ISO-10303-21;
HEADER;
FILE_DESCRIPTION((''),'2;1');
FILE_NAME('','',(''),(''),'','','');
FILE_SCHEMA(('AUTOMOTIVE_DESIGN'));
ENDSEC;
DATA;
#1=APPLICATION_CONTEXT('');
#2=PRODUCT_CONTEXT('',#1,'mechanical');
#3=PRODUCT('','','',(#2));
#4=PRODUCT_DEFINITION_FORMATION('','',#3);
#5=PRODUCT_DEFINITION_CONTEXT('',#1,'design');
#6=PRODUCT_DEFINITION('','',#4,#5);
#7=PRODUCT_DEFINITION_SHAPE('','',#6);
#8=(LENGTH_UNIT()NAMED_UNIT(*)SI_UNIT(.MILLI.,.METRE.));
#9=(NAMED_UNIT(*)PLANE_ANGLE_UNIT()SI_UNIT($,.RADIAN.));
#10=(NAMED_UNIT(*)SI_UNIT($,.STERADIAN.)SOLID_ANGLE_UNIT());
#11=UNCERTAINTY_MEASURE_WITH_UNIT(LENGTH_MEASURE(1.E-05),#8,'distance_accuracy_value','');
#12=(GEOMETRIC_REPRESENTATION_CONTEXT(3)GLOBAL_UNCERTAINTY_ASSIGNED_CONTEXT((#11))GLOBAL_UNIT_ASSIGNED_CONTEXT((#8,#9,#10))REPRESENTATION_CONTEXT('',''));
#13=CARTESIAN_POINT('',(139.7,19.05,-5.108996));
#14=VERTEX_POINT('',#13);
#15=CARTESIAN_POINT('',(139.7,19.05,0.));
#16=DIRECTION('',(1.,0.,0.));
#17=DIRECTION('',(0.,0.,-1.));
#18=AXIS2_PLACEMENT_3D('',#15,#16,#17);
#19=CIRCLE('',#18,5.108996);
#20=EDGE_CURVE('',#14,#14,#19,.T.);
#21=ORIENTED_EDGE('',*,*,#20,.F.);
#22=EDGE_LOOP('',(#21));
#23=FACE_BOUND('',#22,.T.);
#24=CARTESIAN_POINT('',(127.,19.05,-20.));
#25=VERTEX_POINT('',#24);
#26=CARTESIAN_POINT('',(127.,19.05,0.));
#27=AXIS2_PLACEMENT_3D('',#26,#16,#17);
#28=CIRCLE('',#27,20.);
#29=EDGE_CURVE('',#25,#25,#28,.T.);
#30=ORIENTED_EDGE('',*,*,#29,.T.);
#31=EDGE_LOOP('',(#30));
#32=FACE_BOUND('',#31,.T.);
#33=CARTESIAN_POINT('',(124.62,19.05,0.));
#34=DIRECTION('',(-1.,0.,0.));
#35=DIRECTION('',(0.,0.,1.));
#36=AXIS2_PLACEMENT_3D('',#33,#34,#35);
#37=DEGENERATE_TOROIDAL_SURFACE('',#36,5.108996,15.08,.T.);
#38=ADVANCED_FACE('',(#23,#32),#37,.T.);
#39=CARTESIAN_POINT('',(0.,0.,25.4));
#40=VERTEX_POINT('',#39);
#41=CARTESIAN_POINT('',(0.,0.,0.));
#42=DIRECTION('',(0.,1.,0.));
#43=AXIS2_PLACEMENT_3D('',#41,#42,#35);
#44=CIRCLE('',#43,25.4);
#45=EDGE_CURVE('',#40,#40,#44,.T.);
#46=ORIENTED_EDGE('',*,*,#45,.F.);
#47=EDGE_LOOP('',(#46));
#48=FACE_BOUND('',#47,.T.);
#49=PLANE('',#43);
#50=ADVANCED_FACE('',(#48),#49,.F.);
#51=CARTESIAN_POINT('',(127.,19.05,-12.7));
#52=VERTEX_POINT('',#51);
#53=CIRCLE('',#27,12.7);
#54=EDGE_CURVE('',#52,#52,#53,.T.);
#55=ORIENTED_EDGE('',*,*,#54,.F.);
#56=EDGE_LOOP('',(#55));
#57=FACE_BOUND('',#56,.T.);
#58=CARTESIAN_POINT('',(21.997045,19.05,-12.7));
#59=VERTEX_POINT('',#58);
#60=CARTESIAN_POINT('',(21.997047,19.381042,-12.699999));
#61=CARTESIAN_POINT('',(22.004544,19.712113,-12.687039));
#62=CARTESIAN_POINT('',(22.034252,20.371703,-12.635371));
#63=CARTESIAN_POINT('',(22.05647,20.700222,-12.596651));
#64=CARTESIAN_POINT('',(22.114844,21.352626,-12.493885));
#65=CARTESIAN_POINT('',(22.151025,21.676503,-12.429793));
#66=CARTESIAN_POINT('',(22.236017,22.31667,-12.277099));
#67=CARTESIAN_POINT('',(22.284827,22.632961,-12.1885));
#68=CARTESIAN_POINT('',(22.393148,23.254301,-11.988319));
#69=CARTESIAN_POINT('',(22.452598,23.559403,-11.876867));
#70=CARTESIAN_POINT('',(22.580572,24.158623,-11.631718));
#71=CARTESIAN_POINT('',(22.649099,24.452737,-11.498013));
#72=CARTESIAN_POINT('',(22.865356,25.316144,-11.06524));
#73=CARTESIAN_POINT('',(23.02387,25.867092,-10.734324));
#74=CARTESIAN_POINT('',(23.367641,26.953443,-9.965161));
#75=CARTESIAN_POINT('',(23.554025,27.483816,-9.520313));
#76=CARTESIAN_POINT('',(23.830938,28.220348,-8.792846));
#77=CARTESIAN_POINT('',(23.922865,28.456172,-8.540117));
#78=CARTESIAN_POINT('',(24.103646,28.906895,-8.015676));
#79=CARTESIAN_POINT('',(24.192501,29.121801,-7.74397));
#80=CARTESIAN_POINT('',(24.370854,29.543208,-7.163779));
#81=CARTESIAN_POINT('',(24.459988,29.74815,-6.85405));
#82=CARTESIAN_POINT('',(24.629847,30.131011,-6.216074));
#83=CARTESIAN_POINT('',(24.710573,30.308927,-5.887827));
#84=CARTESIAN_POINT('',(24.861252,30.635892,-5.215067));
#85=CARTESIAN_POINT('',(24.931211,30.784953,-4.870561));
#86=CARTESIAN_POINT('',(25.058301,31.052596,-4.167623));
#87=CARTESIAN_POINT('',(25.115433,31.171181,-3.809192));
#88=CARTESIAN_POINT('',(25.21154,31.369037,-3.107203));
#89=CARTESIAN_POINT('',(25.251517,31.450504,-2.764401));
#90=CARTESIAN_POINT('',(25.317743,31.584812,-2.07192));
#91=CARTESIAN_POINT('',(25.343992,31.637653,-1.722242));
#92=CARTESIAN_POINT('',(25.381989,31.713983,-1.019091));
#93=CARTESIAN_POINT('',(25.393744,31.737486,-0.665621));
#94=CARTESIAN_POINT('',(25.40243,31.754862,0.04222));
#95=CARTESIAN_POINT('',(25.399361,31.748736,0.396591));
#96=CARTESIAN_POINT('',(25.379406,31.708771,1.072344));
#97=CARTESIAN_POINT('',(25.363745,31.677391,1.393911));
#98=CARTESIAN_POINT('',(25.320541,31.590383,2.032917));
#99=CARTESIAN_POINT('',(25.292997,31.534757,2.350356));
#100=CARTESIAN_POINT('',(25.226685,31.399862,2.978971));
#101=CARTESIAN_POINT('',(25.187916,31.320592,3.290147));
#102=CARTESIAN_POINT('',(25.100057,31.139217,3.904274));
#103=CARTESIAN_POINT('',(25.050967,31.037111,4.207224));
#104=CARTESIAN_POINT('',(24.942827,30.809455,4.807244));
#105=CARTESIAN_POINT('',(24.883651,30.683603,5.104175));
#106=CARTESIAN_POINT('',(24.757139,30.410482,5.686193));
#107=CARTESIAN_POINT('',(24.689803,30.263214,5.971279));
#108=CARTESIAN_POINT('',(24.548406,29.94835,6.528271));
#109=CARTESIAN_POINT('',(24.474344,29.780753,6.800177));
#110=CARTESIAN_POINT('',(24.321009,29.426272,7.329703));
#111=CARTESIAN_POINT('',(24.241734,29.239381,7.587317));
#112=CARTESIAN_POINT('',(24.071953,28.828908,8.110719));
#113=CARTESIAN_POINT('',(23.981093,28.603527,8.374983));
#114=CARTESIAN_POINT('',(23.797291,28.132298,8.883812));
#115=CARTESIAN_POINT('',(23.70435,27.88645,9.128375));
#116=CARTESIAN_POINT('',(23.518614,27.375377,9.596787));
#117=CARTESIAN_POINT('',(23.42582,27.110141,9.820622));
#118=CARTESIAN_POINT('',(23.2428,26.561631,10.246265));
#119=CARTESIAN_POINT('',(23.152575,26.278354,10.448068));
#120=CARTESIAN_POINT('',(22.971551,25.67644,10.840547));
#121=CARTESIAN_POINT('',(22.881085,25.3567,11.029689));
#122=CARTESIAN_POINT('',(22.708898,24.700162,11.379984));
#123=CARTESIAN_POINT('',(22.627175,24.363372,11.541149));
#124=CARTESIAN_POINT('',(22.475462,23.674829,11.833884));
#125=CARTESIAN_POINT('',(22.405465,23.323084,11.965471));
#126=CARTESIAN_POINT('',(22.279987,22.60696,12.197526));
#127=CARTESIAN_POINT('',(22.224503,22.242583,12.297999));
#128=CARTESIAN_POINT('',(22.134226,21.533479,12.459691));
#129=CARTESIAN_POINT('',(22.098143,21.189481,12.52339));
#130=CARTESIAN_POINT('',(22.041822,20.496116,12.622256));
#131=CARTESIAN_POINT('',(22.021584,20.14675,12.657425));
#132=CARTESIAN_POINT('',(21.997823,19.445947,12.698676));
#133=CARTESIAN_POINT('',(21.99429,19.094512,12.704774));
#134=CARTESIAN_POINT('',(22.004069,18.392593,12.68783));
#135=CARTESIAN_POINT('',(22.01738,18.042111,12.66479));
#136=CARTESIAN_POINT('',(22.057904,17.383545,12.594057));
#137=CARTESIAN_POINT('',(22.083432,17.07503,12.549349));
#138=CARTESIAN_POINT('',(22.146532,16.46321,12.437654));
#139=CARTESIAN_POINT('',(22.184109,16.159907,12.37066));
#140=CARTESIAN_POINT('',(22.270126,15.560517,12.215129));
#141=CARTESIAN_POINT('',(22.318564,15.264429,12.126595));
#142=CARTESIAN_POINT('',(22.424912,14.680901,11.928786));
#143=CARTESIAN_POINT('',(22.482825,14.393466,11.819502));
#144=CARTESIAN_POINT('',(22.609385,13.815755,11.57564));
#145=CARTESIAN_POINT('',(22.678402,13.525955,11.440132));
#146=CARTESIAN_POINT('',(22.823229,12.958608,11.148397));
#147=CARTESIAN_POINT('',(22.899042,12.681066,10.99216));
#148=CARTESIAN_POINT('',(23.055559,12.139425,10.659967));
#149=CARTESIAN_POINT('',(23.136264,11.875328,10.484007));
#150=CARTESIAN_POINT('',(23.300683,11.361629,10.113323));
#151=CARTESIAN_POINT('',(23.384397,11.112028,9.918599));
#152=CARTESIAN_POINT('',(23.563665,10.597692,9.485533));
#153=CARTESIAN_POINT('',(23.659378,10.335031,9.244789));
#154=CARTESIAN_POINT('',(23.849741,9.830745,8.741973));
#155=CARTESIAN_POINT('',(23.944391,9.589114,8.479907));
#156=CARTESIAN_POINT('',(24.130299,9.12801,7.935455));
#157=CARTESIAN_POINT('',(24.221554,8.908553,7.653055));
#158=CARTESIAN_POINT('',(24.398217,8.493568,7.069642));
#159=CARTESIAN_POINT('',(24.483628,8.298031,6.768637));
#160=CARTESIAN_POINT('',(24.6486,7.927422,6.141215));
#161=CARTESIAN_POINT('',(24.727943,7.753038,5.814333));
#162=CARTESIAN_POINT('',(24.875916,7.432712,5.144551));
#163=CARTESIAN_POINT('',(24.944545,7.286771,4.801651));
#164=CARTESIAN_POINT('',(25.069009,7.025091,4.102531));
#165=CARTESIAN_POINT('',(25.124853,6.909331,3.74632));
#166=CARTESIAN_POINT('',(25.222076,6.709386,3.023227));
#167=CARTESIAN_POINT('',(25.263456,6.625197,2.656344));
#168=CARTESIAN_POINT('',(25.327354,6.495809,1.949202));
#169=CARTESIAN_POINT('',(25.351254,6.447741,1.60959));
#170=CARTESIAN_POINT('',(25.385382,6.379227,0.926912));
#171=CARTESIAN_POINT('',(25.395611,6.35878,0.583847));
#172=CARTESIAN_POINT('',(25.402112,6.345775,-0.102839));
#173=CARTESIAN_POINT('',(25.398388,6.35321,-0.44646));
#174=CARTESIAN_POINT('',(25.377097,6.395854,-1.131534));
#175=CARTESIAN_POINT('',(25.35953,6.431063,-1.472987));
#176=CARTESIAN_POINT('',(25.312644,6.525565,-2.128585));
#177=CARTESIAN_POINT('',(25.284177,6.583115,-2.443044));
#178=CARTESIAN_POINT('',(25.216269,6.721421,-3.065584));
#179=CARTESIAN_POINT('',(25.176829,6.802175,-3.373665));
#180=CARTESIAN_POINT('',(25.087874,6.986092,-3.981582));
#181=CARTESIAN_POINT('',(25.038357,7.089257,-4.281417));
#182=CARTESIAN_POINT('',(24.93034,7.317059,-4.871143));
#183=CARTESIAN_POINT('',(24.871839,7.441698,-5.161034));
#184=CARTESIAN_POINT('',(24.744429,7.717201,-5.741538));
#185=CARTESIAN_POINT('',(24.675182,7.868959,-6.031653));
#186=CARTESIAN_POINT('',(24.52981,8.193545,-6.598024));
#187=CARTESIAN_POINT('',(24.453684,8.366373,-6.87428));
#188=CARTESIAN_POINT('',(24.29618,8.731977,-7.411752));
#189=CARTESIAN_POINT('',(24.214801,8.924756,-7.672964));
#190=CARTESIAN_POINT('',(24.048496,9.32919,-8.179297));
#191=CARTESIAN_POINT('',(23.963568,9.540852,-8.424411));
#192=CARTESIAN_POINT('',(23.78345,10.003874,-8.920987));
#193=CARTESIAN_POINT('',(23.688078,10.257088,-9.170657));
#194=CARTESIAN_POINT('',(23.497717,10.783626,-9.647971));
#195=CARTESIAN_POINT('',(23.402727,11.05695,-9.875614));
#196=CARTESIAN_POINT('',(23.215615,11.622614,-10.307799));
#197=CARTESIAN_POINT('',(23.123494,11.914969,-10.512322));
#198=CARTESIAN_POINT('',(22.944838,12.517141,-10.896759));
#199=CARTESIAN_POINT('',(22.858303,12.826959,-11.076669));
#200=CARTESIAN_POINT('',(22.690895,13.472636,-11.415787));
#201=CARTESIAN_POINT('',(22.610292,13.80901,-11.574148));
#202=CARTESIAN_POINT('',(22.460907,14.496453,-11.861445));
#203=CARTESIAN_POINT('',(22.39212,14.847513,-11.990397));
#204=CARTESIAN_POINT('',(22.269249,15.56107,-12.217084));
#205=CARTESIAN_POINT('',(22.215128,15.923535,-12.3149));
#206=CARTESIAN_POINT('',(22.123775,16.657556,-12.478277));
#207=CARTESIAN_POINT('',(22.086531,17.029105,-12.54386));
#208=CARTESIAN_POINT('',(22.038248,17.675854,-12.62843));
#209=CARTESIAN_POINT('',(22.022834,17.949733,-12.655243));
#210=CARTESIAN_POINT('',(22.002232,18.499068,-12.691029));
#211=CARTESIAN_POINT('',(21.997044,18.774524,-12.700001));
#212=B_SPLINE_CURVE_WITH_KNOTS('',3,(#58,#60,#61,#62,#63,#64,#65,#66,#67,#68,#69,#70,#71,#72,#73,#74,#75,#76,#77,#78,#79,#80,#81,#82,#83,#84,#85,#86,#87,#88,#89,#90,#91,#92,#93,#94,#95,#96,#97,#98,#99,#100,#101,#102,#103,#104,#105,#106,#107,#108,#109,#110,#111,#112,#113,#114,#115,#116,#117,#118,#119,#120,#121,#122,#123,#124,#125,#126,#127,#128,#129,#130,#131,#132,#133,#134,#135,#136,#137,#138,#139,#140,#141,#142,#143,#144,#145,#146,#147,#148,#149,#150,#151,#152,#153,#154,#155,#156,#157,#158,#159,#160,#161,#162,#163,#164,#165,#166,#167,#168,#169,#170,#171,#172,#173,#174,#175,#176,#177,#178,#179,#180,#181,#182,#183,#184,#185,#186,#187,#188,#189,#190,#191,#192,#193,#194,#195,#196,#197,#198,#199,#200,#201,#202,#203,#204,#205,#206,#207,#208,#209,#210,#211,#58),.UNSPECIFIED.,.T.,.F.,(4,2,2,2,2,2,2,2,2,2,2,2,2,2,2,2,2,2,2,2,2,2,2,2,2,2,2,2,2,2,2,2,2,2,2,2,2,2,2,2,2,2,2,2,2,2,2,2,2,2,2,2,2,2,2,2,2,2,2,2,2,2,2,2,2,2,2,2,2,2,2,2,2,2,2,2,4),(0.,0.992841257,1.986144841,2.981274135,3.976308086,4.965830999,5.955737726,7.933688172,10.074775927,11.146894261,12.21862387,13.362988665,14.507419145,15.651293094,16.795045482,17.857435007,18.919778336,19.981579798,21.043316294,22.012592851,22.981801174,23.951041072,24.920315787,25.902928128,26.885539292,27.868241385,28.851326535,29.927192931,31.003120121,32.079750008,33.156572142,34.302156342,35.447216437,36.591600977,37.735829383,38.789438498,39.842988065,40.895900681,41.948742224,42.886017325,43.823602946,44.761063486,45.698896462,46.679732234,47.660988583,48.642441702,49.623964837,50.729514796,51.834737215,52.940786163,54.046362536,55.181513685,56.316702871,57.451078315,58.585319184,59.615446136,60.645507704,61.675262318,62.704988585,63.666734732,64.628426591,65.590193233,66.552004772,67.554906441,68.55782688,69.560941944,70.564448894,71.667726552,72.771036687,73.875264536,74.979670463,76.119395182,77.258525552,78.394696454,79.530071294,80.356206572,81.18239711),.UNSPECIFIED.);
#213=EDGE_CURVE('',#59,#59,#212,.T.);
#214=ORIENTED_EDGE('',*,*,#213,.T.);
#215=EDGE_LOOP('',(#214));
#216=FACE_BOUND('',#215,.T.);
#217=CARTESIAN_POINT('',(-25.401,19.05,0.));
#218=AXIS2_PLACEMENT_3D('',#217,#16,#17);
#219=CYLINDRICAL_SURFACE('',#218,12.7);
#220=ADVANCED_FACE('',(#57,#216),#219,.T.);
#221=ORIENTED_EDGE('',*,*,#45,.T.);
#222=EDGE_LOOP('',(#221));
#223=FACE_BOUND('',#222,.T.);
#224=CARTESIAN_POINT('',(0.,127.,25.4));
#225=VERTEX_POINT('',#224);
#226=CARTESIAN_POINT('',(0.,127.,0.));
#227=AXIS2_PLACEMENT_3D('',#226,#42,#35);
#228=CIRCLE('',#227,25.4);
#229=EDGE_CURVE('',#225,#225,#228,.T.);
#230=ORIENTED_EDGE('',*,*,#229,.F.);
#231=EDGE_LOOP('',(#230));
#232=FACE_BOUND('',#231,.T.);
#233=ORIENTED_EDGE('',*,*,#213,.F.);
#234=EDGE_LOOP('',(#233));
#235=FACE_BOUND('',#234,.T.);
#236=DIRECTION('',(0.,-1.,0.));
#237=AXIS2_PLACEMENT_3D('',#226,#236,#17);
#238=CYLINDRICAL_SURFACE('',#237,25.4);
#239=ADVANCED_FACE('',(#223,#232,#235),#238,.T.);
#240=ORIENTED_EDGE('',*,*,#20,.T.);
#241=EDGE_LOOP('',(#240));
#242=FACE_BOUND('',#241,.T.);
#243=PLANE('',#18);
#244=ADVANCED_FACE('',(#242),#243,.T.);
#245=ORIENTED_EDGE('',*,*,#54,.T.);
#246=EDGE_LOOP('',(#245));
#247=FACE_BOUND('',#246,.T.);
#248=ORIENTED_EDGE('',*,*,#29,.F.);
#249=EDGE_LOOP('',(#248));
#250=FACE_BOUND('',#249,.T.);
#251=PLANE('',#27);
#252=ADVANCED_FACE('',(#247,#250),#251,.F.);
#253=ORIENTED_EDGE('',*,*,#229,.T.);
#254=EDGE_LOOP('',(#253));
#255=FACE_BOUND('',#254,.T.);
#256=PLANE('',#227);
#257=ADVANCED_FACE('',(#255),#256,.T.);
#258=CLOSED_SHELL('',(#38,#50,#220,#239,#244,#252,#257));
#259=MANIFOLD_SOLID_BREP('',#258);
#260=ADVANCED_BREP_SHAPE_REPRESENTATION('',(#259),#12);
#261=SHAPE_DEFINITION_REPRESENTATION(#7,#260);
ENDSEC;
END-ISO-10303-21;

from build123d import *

# Parameters (mm, degrees)
SKETCH1_R                = 25.4
BOSS_EXTRUDE1_DEPTH      = 127
BOSS_EXTRUDE2_REACH      = 202
BOSS_EXTRUDE2_END_RADIUS = 25.4
SKETCH3_R                = 12.7
SKETCH4_R                = 20
BOSS_EXTRUDE3_DEPTH      = 12.7
FILLET1_R                = 15.08


with BuildPart() as part:
    # Sketch1 → Boss-Extrude1 (new body)
    with BuildSketch(Plane(origin=(0, 0, 0), x_dir=(1, 0, 0), z_dir=(0, 1, 0))):
        with Locations(Location((0, 0, 0), (0, 0, 270))):
            Circle(SKETCH1_R)
    extrude(amount=BOSS_EXTRUDE1_DEPTH)

    # Boss-Extrude2: up to this cylinder (the profile starts outside it)
    boss_extrude2_end = Plane(origin=(0, 19.05, 0), z_dir=(0, -1, 0)) * Cylinder(BOSS_EXTRUDE2_END_RADIUS, 455.8, mode=Mode.PRIVATE)
    # Sketch3 → Boss-Extrude2 (add, up to the surface)
    with BuildSketch(Plane(origin=(127, 0, 0), x_dir=(0, 0, -1), z_dir=(1, 0, 0)), mode=Mode.PRIVATE) as boss_extrude2_sk1:
        with Locations((0, 19.05)):
            Circle(SKETCH3_R)
    boss_extrude2_tool1 = extrude(boss_extrude2_sk1.sketch, amount=-BOSS_EXTRUDE2_REACH, mode=Mode.PRIVATE) - boss_extrude2_end
    add(boss_extrude2_tool1.solids().sort_by_distance((127, 19.05, 0))[0])

    # Sketch4 → Boss-Extrude3 (add)
    with BuildSketch(Plane(origin=(127, 0, 0), x_dir=(0, 0, -1), z_dir=(1, 0, 0))):
        with Locations((0, 19.05)):
            Circle(SKETCH4_R)
    extrude(amount=BOSS_EXTRUDE3_DEPTH)

    # Fillet1
    # the kernel refuses this fillet: 15.08 mm, written as the material it takes off along each edge
    with BuildSketch(Plane(origin=(139.7, 19.05, 0), x_dir=(0, 0, -1), z_dir=(0, -1, 0))) as fillet1_piece_1:
        with BuildLine():
            CenterArc((5.108996004, -15.08), FILLET1_R, 9.080670078, 80.919329922)
            Line((5.108996004, 0), (5.108996004, 0.3016))
            Line((5.108996004, 0.3016), (20, 0.3016))
            Line((20, 0.3016), (20.3016, 0))
            ThreePointArc((20.3016, 0), (20.3016, -6.35), (20.29782008, -12.6524))
            Line((20.29782008, -12.6524), (20, -12.7))
        make_face()
    revolve(axis=Axis((139.7, 19.05, 0), (1, 0, 0)), mode=Mode.SUBTRACT)


solid = part.part
